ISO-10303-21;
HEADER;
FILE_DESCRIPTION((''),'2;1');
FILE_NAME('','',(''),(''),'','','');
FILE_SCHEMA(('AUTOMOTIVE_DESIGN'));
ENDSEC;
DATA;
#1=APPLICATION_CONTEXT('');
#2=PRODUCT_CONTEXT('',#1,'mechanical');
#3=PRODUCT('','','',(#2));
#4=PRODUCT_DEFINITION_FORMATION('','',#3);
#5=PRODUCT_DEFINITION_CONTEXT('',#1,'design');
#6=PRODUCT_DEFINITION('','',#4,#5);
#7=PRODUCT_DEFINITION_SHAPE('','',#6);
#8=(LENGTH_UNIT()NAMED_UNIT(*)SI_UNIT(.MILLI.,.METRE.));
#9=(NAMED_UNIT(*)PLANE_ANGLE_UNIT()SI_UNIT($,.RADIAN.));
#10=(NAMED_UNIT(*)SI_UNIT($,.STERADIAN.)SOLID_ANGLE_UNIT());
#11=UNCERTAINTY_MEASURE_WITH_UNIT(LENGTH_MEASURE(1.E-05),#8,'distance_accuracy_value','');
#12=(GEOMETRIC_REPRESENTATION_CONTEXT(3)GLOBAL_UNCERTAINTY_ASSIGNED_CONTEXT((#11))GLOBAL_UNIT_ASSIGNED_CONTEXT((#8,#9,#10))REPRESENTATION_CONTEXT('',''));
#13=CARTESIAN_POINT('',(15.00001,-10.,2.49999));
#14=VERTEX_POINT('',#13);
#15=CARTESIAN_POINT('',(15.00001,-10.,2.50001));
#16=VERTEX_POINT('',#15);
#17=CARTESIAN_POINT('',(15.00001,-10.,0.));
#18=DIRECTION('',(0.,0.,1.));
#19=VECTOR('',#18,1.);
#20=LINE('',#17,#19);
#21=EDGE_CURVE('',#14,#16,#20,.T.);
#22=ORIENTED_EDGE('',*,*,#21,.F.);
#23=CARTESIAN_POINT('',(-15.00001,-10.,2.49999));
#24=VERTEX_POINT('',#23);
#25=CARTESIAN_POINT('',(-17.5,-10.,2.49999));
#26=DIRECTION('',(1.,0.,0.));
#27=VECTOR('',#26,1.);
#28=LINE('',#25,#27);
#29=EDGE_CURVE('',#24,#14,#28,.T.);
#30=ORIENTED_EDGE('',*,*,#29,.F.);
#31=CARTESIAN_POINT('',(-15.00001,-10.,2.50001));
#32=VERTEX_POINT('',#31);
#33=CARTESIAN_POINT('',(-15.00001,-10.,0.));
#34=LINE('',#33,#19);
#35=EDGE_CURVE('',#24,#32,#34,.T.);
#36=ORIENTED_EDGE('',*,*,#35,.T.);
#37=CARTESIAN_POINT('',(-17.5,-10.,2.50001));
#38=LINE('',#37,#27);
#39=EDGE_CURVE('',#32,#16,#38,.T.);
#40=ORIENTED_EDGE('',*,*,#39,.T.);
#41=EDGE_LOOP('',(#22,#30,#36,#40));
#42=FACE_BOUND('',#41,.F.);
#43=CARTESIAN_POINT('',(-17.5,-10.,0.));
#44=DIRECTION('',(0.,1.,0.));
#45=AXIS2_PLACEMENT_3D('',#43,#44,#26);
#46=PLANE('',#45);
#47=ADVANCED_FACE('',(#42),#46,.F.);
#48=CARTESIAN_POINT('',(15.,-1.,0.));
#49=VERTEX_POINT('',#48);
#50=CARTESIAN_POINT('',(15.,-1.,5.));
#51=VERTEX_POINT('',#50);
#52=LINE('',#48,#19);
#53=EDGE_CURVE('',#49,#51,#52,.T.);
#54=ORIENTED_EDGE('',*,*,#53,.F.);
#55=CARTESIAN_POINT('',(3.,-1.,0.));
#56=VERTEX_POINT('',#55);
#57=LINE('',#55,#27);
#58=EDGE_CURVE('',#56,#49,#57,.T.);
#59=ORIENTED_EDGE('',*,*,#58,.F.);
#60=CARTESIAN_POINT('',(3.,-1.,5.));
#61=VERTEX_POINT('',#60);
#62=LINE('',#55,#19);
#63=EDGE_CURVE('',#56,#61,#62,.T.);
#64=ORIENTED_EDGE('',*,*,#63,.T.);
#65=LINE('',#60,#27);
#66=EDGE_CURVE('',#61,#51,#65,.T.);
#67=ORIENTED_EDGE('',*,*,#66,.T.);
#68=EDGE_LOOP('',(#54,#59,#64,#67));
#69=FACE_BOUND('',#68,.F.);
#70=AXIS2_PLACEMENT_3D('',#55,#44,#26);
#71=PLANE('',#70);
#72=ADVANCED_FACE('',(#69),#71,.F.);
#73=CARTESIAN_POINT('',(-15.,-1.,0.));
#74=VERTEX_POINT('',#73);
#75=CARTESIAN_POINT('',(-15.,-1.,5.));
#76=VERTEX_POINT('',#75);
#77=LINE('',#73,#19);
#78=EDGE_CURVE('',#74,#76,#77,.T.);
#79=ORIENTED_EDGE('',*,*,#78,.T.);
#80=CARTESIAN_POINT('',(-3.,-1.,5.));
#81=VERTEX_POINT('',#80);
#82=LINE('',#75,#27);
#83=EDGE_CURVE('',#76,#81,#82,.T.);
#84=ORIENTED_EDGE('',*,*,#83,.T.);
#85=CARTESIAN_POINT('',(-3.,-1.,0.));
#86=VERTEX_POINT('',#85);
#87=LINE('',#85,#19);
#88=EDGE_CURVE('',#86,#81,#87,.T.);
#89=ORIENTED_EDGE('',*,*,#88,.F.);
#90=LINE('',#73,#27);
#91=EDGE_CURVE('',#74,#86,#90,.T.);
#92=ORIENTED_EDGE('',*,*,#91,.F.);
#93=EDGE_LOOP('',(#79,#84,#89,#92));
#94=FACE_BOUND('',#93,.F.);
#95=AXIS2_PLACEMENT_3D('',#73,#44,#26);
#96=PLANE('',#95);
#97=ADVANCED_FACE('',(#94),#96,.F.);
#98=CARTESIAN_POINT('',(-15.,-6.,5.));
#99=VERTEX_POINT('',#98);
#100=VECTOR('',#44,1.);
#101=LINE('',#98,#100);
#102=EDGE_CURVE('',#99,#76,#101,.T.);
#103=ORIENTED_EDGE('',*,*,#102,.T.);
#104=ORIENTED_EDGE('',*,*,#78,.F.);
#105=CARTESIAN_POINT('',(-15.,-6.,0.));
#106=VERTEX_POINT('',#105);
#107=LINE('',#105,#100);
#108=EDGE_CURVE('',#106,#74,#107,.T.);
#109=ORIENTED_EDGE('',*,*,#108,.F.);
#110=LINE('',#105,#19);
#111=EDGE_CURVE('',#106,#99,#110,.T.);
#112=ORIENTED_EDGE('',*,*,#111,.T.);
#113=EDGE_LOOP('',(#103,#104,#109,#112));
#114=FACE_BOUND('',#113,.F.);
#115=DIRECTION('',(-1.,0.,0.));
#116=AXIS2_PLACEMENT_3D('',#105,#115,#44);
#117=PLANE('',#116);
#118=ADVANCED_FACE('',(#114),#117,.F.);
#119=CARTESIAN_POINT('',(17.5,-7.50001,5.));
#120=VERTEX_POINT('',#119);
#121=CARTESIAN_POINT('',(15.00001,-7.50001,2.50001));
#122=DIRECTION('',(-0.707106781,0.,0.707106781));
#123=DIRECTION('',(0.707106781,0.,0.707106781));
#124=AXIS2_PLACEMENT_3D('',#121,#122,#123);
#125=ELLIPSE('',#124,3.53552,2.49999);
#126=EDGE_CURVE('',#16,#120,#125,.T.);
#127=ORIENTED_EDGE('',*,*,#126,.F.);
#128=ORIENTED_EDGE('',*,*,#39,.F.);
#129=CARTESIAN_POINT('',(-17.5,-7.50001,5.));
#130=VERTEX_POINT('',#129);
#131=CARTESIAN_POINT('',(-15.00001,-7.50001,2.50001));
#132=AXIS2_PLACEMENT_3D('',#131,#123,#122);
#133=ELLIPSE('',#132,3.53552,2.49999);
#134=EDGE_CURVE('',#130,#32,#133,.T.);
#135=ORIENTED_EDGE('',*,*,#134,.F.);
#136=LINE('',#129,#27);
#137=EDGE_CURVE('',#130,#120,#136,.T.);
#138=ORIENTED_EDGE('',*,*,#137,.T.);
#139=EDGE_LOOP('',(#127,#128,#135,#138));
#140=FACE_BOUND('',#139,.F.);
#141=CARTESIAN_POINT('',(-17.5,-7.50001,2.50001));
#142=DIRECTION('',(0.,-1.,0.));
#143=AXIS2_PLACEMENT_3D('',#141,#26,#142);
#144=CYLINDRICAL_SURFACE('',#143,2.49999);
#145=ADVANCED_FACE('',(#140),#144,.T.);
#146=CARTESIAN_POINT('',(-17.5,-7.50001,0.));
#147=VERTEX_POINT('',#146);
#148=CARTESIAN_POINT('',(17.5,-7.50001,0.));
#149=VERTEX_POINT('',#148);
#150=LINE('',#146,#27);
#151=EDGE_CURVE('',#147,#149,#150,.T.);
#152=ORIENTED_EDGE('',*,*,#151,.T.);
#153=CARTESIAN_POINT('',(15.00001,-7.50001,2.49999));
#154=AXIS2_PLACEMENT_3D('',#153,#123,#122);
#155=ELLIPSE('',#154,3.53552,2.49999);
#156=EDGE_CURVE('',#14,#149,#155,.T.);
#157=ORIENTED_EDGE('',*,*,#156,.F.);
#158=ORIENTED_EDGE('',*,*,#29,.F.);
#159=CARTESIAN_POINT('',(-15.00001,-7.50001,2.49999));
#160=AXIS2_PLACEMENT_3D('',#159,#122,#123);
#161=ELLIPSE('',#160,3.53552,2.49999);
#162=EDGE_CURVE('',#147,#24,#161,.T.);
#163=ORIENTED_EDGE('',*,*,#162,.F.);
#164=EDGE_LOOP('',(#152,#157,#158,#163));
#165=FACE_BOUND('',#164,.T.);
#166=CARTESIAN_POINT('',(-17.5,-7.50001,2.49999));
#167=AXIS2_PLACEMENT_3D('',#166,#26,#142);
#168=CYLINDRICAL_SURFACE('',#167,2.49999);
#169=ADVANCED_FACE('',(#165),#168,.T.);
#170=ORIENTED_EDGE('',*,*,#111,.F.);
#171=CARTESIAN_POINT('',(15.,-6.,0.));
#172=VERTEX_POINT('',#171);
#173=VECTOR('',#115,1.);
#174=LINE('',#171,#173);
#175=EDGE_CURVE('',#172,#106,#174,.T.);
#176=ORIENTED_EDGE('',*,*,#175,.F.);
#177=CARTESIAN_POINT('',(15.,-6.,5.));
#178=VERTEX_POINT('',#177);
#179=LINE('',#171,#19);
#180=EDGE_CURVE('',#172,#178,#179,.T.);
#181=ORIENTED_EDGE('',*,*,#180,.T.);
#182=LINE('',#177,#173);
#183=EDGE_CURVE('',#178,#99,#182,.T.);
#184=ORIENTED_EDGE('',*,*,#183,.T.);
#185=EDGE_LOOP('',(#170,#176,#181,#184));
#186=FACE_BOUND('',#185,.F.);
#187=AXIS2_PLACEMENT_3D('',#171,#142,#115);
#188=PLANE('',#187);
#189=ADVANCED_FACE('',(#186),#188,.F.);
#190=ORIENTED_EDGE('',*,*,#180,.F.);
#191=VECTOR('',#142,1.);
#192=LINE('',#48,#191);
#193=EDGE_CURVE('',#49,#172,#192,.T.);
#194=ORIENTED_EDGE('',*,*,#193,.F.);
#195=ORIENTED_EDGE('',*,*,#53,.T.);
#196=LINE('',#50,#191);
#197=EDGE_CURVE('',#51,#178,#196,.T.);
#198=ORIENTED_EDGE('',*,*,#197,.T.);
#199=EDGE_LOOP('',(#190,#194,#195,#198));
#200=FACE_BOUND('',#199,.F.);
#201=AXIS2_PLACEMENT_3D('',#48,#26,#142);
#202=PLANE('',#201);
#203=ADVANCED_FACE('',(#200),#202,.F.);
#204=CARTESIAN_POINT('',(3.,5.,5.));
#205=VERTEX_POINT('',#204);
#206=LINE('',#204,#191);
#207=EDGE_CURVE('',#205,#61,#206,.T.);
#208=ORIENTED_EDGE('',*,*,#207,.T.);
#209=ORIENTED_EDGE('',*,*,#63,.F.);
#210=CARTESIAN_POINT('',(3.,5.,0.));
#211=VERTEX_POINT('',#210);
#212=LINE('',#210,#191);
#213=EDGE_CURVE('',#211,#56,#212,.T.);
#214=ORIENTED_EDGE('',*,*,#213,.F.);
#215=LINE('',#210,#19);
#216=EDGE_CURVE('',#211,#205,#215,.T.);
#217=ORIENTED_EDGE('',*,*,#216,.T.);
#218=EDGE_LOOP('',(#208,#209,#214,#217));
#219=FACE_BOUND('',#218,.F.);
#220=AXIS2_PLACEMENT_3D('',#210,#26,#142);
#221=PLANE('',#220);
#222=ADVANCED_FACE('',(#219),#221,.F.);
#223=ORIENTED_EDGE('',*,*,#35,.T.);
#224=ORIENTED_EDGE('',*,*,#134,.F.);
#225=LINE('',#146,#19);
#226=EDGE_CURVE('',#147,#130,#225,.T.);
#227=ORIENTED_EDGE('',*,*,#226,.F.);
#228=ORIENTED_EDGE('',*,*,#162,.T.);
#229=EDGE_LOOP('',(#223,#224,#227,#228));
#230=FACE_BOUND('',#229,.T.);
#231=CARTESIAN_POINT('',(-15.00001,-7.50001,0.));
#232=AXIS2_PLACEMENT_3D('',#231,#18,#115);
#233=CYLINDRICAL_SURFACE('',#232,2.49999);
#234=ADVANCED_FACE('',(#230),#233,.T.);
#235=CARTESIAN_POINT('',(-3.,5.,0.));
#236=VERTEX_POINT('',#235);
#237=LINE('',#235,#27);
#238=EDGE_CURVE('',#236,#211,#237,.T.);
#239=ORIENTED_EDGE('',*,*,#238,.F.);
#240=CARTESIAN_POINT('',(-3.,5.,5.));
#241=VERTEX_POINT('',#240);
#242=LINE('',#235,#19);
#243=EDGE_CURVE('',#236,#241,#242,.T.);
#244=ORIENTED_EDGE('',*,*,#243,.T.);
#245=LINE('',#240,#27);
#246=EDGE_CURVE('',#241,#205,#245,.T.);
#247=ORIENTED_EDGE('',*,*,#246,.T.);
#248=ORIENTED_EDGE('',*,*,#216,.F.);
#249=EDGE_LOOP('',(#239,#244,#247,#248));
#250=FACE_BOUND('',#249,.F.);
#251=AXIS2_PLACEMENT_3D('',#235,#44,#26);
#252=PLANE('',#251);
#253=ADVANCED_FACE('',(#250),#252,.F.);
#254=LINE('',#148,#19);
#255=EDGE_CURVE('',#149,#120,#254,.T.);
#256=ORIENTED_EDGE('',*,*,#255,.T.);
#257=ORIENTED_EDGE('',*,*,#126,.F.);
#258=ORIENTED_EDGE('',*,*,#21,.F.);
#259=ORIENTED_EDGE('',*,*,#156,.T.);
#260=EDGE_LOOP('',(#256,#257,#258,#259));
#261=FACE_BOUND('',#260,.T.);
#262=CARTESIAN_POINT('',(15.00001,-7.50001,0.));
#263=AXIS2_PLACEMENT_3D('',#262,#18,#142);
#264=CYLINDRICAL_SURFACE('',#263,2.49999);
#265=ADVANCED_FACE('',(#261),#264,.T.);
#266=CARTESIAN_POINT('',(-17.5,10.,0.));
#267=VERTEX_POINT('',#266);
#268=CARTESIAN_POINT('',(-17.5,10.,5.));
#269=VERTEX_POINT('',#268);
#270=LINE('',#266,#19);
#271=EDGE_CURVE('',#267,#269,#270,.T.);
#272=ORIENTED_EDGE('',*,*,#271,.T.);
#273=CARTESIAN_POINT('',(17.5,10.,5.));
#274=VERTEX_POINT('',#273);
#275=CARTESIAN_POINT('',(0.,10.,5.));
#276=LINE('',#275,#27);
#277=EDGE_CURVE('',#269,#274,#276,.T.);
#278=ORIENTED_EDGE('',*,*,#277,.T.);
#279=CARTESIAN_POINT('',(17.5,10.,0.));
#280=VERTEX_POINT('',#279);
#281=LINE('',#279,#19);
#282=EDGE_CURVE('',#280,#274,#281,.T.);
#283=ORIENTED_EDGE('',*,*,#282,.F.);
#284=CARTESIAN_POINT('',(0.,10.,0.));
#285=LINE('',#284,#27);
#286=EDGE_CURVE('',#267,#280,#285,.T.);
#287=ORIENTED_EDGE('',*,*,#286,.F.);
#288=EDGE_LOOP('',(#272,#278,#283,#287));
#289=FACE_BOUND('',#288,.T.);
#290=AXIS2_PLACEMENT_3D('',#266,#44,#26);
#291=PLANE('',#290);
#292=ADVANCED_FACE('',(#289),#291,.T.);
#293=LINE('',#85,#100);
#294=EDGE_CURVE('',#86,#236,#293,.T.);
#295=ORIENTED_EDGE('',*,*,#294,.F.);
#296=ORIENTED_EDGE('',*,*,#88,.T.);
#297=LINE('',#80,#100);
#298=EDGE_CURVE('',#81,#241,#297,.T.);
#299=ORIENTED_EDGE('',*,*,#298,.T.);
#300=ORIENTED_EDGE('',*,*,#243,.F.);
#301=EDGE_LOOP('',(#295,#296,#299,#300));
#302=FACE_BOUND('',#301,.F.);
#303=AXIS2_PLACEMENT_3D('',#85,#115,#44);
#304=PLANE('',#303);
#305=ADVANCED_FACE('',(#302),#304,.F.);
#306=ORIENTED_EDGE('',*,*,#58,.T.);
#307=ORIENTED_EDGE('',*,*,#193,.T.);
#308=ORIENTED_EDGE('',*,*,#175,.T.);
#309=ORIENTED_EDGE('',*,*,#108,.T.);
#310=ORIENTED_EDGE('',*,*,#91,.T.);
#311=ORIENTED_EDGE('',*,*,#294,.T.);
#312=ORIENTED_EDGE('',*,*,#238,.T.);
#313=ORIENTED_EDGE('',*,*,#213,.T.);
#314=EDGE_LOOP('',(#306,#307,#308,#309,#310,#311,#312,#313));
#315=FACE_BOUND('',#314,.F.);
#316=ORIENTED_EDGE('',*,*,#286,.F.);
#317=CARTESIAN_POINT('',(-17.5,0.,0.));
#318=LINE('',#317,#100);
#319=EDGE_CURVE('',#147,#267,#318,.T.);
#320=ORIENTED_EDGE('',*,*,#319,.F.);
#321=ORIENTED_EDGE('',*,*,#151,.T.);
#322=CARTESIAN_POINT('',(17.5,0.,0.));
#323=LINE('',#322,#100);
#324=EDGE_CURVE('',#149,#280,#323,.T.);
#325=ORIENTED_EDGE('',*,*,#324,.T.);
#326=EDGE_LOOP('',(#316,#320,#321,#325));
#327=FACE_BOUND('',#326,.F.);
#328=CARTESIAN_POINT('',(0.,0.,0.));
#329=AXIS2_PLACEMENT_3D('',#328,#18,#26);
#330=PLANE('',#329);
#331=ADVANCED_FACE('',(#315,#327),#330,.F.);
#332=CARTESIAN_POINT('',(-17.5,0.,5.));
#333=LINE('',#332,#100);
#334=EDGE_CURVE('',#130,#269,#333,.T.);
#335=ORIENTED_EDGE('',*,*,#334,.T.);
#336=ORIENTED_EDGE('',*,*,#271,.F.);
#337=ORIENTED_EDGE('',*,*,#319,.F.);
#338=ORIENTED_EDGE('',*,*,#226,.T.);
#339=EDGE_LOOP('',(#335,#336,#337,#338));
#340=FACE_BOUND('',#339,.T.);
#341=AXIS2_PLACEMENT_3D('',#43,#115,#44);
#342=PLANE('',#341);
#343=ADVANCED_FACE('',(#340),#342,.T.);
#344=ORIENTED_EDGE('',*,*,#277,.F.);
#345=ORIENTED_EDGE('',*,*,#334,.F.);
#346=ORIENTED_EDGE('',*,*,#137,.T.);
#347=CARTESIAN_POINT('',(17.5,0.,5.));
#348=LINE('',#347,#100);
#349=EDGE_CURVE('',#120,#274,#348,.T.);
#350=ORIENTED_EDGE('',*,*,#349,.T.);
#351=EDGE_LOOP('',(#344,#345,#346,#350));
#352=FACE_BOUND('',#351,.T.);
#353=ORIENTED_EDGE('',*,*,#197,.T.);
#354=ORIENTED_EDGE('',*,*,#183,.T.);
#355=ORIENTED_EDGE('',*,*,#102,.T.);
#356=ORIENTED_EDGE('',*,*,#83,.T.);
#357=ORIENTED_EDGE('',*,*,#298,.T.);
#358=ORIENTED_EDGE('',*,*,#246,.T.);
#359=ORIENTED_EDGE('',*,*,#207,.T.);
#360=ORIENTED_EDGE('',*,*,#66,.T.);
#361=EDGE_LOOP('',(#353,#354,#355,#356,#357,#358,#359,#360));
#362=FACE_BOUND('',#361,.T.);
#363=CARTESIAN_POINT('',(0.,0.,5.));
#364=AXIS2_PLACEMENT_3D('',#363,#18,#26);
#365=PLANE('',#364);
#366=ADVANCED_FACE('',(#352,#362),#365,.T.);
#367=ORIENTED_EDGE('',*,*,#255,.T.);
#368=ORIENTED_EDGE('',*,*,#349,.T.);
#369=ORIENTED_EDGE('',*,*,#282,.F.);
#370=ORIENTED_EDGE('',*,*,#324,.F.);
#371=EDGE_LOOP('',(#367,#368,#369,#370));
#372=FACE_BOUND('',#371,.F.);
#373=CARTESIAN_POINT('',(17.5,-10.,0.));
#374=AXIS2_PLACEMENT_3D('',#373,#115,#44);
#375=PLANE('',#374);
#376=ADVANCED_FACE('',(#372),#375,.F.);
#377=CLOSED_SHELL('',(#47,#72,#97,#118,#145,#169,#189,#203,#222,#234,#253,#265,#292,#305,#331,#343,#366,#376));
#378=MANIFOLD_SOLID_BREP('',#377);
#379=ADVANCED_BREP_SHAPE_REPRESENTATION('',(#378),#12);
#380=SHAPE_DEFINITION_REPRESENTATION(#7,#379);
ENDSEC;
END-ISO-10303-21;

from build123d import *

# Parameters (mm, degrees)
F0_W     = 35
F0_H     = 20
F1_DEPTH = 5
F2_R     = 2.49999


# Not quite as in the source:
# - a fillet or chamfer is up to 0.001 mm smaller than in the source, because OpenCascade refuses the exact size


with BuildPart() as f1:
    # F0 (on Top) → F1 (new body)
    with BuildSketch(Plane.XY):
        Rectangle(F0_W, F0_H)
        Polygon((3, -1), (15, -1), (15, -6), (-15, -6), (-15, -1), (-3, -1), (-3, 5), (3, 5), align=None, mode=Mode.SUBTRACT)
    extrude(amount=F1_DEPTH)

    # F2 (radius 2.5 in the source; OpenCascade refuses exactly that, so slightly less here)
    f2_edges = [f1.edges().sort_by_distance(p)[0] for p in [
        (-17.5, -10, 2.5),
        (17.5, -10, 2.5),
        (0, -10, 0),
        (0, -10, 5),
    ]]
    fillet(f2_edges, radius=F2_R)


solid = f1.part
